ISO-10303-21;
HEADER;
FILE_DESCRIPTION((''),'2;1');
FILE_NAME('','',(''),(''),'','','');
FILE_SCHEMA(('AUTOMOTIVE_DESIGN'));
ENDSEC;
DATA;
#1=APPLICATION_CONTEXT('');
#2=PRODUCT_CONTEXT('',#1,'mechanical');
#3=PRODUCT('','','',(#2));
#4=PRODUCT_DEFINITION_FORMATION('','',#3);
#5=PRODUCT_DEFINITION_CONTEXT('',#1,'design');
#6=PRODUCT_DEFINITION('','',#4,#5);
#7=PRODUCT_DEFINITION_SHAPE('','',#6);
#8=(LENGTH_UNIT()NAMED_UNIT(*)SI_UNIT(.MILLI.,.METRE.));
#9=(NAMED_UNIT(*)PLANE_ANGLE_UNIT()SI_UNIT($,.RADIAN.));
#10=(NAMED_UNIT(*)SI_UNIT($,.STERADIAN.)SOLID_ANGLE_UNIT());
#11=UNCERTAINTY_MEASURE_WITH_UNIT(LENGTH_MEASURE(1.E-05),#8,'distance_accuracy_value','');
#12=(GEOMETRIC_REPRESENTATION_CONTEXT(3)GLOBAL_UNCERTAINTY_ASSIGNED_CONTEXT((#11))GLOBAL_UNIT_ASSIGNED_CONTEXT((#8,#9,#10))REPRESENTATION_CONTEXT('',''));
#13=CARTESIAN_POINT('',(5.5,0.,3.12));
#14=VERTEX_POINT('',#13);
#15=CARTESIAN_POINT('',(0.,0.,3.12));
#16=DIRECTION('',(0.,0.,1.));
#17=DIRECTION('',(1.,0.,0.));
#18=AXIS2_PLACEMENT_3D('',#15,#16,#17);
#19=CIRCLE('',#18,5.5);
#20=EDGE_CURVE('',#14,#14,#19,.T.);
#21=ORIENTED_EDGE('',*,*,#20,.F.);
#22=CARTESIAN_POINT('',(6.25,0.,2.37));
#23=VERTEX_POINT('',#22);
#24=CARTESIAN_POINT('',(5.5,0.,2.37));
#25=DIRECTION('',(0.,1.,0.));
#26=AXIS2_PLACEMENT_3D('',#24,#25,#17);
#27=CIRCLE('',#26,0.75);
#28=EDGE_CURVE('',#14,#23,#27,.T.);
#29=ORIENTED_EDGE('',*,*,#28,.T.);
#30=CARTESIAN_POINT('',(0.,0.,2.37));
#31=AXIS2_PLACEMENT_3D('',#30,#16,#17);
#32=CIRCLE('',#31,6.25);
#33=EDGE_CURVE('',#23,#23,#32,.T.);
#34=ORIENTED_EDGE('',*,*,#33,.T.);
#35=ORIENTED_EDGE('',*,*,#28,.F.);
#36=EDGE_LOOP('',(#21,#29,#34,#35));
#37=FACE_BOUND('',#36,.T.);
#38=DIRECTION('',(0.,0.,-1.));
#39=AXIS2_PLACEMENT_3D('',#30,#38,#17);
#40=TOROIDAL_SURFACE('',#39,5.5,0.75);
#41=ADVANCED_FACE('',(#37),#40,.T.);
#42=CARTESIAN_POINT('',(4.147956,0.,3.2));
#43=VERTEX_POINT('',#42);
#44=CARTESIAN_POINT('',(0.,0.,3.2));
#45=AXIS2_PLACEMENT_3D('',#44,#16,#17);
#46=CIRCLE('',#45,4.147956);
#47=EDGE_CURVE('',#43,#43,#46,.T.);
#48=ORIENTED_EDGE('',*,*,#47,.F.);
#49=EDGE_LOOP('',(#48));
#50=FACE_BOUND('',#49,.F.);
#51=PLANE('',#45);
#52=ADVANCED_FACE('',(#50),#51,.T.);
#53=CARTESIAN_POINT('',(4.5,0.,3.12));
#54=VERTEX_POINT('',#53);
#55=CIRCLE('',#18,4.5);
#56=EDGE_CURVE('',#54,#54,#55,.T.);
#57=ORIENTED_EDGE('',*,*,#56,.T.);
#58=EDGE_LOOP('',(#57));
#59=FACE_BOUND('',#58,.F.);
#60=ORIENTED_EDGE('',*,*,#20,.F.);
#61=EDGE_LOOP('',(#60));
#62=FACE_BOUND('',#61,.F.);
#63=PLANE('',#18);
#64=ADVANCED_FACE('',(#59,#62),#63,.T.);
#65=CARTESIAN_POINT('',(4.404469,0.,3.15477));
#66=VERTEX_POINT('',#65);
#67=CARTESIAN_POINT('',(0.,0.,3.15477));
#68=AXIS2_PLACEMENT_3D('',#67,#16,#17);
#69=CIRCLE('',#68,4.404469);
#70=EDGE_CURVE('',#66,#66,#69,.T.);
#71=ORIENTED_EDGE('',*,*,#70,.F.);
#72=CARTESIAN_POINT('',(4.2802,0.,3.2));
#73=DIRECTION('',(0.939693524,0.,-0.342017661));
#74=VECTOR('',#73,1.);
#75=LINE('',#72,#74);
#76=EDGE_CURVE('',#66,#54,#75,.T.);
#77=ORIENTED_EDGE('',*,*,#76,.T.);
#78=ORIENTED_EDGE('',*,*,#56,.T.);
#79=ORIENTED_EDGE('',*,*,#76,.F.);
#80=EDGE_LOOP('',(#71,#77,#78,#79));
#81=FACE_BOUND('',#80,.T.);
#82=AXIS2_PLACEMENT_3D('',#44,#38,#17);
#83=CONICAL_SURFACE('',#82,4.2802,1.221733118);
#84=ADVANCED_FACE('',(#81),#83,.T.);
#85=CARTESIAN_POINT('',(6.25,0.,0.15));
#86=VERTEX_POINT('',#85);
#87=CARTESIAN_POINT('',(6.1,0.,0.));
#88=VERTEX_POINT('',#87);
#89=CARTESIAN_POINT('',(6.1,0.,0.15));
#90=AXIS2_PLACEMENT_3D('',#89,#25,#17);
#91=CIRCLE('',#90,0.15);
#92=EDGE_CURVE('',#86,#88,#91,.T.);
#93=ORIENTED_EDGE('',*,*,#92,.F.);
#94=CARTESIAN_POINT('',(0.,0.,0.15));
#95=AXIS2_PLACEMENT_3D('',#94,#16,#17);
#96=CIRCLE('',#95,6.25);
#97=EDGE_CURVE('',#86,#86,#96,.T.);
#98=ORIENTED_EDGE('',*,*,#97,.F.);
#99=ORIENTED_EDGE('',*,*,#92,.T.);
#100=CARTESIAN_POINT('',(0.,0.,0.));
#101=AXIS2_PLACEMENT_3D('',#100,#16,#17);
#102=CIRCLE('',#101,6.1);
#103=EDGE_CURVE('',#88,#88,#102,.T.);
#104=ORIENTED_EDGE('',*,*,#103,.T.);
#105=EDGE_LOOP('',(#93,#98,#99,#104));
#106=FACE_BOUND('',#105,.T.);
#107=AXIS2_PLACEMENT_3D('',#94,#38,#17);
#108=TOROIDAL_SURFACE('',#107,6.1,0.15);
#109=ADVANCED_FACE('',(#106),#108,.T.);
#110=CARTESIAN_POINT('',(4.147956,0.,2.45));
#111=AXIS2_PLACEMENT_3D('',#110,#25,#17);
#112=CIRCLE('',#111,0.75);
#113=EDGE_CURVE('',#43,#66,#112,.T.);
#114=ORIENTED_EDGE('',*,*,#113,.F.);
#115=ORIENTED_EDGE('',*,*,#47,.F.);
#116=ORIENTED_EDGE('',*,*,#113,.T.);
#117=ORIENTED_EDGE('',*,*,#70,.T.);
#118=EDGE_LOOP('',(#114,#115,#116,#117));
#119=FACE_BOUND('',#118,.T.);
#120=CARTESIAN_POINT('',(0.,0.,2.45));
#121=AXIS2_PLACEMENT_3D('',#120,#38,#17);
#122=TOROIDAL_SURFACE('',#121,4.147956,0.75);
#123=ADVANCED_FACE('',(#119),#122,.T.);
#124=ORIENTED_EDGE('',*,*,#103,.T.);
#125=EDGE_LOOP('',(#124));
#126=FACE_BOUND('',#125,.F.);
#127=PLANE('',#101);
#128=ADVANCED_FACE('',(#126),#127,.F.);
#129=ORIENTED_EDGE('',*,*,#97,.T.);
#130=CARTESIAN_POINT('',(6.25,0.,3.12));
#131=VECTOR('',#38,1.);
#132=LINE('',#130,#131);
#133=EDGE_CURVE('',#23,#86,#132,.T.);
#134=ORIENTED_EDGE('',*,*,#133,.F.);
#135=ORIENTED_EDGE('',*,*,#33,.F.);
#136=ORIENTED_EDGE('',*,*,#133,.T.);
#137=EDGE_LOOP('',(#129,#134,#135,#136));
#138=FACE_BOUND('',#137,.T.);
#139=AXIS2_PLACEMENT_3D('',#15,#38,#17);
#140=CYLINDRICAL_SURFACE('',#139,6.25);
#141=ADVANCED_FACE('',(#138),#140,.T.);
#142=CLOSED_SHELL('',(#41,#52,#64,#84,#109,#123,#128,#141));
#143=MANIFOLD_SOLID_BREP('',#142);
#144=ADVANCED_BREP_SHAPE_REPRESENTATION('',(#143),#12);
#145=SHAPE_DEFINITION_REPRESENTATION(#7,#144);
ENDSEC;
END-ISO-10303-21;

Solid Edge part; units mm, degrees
sketch "Sketch1" plane through (0, 0, 0) normal (0, -1, 0) x (1, 0, 0)
  line L0 (0, 3.2) -> (4.2802, 3.2)
  line L1 (4.2802, 3.2) -> (4.5, 3.12)
  line L2 (4.5, 3.12) -> (6.25, 3.12)
  line L3 (6.25, 3.12) -> (6.25, 0)
  line L4 (6.25, 0) -> (0, 0)
  dimension "D1" = 6.25
  dimension "D2" = 4.5
  dimension "D3" = 0.08
  dimension "D4" = 3.2
revolve "RevolvedProtrusion1" add sketch "Sketch1" angle 360 about axis through (0, 0, 0) along (0, 0, 1)
fillet "Round1" radius 0.75 2 edges at (-6.25, 0, 3.12) (-4.2802, 0, 3.2)
fillet "Round_2" radius 0.15 1 edges at (-6.25, 0, 0)
